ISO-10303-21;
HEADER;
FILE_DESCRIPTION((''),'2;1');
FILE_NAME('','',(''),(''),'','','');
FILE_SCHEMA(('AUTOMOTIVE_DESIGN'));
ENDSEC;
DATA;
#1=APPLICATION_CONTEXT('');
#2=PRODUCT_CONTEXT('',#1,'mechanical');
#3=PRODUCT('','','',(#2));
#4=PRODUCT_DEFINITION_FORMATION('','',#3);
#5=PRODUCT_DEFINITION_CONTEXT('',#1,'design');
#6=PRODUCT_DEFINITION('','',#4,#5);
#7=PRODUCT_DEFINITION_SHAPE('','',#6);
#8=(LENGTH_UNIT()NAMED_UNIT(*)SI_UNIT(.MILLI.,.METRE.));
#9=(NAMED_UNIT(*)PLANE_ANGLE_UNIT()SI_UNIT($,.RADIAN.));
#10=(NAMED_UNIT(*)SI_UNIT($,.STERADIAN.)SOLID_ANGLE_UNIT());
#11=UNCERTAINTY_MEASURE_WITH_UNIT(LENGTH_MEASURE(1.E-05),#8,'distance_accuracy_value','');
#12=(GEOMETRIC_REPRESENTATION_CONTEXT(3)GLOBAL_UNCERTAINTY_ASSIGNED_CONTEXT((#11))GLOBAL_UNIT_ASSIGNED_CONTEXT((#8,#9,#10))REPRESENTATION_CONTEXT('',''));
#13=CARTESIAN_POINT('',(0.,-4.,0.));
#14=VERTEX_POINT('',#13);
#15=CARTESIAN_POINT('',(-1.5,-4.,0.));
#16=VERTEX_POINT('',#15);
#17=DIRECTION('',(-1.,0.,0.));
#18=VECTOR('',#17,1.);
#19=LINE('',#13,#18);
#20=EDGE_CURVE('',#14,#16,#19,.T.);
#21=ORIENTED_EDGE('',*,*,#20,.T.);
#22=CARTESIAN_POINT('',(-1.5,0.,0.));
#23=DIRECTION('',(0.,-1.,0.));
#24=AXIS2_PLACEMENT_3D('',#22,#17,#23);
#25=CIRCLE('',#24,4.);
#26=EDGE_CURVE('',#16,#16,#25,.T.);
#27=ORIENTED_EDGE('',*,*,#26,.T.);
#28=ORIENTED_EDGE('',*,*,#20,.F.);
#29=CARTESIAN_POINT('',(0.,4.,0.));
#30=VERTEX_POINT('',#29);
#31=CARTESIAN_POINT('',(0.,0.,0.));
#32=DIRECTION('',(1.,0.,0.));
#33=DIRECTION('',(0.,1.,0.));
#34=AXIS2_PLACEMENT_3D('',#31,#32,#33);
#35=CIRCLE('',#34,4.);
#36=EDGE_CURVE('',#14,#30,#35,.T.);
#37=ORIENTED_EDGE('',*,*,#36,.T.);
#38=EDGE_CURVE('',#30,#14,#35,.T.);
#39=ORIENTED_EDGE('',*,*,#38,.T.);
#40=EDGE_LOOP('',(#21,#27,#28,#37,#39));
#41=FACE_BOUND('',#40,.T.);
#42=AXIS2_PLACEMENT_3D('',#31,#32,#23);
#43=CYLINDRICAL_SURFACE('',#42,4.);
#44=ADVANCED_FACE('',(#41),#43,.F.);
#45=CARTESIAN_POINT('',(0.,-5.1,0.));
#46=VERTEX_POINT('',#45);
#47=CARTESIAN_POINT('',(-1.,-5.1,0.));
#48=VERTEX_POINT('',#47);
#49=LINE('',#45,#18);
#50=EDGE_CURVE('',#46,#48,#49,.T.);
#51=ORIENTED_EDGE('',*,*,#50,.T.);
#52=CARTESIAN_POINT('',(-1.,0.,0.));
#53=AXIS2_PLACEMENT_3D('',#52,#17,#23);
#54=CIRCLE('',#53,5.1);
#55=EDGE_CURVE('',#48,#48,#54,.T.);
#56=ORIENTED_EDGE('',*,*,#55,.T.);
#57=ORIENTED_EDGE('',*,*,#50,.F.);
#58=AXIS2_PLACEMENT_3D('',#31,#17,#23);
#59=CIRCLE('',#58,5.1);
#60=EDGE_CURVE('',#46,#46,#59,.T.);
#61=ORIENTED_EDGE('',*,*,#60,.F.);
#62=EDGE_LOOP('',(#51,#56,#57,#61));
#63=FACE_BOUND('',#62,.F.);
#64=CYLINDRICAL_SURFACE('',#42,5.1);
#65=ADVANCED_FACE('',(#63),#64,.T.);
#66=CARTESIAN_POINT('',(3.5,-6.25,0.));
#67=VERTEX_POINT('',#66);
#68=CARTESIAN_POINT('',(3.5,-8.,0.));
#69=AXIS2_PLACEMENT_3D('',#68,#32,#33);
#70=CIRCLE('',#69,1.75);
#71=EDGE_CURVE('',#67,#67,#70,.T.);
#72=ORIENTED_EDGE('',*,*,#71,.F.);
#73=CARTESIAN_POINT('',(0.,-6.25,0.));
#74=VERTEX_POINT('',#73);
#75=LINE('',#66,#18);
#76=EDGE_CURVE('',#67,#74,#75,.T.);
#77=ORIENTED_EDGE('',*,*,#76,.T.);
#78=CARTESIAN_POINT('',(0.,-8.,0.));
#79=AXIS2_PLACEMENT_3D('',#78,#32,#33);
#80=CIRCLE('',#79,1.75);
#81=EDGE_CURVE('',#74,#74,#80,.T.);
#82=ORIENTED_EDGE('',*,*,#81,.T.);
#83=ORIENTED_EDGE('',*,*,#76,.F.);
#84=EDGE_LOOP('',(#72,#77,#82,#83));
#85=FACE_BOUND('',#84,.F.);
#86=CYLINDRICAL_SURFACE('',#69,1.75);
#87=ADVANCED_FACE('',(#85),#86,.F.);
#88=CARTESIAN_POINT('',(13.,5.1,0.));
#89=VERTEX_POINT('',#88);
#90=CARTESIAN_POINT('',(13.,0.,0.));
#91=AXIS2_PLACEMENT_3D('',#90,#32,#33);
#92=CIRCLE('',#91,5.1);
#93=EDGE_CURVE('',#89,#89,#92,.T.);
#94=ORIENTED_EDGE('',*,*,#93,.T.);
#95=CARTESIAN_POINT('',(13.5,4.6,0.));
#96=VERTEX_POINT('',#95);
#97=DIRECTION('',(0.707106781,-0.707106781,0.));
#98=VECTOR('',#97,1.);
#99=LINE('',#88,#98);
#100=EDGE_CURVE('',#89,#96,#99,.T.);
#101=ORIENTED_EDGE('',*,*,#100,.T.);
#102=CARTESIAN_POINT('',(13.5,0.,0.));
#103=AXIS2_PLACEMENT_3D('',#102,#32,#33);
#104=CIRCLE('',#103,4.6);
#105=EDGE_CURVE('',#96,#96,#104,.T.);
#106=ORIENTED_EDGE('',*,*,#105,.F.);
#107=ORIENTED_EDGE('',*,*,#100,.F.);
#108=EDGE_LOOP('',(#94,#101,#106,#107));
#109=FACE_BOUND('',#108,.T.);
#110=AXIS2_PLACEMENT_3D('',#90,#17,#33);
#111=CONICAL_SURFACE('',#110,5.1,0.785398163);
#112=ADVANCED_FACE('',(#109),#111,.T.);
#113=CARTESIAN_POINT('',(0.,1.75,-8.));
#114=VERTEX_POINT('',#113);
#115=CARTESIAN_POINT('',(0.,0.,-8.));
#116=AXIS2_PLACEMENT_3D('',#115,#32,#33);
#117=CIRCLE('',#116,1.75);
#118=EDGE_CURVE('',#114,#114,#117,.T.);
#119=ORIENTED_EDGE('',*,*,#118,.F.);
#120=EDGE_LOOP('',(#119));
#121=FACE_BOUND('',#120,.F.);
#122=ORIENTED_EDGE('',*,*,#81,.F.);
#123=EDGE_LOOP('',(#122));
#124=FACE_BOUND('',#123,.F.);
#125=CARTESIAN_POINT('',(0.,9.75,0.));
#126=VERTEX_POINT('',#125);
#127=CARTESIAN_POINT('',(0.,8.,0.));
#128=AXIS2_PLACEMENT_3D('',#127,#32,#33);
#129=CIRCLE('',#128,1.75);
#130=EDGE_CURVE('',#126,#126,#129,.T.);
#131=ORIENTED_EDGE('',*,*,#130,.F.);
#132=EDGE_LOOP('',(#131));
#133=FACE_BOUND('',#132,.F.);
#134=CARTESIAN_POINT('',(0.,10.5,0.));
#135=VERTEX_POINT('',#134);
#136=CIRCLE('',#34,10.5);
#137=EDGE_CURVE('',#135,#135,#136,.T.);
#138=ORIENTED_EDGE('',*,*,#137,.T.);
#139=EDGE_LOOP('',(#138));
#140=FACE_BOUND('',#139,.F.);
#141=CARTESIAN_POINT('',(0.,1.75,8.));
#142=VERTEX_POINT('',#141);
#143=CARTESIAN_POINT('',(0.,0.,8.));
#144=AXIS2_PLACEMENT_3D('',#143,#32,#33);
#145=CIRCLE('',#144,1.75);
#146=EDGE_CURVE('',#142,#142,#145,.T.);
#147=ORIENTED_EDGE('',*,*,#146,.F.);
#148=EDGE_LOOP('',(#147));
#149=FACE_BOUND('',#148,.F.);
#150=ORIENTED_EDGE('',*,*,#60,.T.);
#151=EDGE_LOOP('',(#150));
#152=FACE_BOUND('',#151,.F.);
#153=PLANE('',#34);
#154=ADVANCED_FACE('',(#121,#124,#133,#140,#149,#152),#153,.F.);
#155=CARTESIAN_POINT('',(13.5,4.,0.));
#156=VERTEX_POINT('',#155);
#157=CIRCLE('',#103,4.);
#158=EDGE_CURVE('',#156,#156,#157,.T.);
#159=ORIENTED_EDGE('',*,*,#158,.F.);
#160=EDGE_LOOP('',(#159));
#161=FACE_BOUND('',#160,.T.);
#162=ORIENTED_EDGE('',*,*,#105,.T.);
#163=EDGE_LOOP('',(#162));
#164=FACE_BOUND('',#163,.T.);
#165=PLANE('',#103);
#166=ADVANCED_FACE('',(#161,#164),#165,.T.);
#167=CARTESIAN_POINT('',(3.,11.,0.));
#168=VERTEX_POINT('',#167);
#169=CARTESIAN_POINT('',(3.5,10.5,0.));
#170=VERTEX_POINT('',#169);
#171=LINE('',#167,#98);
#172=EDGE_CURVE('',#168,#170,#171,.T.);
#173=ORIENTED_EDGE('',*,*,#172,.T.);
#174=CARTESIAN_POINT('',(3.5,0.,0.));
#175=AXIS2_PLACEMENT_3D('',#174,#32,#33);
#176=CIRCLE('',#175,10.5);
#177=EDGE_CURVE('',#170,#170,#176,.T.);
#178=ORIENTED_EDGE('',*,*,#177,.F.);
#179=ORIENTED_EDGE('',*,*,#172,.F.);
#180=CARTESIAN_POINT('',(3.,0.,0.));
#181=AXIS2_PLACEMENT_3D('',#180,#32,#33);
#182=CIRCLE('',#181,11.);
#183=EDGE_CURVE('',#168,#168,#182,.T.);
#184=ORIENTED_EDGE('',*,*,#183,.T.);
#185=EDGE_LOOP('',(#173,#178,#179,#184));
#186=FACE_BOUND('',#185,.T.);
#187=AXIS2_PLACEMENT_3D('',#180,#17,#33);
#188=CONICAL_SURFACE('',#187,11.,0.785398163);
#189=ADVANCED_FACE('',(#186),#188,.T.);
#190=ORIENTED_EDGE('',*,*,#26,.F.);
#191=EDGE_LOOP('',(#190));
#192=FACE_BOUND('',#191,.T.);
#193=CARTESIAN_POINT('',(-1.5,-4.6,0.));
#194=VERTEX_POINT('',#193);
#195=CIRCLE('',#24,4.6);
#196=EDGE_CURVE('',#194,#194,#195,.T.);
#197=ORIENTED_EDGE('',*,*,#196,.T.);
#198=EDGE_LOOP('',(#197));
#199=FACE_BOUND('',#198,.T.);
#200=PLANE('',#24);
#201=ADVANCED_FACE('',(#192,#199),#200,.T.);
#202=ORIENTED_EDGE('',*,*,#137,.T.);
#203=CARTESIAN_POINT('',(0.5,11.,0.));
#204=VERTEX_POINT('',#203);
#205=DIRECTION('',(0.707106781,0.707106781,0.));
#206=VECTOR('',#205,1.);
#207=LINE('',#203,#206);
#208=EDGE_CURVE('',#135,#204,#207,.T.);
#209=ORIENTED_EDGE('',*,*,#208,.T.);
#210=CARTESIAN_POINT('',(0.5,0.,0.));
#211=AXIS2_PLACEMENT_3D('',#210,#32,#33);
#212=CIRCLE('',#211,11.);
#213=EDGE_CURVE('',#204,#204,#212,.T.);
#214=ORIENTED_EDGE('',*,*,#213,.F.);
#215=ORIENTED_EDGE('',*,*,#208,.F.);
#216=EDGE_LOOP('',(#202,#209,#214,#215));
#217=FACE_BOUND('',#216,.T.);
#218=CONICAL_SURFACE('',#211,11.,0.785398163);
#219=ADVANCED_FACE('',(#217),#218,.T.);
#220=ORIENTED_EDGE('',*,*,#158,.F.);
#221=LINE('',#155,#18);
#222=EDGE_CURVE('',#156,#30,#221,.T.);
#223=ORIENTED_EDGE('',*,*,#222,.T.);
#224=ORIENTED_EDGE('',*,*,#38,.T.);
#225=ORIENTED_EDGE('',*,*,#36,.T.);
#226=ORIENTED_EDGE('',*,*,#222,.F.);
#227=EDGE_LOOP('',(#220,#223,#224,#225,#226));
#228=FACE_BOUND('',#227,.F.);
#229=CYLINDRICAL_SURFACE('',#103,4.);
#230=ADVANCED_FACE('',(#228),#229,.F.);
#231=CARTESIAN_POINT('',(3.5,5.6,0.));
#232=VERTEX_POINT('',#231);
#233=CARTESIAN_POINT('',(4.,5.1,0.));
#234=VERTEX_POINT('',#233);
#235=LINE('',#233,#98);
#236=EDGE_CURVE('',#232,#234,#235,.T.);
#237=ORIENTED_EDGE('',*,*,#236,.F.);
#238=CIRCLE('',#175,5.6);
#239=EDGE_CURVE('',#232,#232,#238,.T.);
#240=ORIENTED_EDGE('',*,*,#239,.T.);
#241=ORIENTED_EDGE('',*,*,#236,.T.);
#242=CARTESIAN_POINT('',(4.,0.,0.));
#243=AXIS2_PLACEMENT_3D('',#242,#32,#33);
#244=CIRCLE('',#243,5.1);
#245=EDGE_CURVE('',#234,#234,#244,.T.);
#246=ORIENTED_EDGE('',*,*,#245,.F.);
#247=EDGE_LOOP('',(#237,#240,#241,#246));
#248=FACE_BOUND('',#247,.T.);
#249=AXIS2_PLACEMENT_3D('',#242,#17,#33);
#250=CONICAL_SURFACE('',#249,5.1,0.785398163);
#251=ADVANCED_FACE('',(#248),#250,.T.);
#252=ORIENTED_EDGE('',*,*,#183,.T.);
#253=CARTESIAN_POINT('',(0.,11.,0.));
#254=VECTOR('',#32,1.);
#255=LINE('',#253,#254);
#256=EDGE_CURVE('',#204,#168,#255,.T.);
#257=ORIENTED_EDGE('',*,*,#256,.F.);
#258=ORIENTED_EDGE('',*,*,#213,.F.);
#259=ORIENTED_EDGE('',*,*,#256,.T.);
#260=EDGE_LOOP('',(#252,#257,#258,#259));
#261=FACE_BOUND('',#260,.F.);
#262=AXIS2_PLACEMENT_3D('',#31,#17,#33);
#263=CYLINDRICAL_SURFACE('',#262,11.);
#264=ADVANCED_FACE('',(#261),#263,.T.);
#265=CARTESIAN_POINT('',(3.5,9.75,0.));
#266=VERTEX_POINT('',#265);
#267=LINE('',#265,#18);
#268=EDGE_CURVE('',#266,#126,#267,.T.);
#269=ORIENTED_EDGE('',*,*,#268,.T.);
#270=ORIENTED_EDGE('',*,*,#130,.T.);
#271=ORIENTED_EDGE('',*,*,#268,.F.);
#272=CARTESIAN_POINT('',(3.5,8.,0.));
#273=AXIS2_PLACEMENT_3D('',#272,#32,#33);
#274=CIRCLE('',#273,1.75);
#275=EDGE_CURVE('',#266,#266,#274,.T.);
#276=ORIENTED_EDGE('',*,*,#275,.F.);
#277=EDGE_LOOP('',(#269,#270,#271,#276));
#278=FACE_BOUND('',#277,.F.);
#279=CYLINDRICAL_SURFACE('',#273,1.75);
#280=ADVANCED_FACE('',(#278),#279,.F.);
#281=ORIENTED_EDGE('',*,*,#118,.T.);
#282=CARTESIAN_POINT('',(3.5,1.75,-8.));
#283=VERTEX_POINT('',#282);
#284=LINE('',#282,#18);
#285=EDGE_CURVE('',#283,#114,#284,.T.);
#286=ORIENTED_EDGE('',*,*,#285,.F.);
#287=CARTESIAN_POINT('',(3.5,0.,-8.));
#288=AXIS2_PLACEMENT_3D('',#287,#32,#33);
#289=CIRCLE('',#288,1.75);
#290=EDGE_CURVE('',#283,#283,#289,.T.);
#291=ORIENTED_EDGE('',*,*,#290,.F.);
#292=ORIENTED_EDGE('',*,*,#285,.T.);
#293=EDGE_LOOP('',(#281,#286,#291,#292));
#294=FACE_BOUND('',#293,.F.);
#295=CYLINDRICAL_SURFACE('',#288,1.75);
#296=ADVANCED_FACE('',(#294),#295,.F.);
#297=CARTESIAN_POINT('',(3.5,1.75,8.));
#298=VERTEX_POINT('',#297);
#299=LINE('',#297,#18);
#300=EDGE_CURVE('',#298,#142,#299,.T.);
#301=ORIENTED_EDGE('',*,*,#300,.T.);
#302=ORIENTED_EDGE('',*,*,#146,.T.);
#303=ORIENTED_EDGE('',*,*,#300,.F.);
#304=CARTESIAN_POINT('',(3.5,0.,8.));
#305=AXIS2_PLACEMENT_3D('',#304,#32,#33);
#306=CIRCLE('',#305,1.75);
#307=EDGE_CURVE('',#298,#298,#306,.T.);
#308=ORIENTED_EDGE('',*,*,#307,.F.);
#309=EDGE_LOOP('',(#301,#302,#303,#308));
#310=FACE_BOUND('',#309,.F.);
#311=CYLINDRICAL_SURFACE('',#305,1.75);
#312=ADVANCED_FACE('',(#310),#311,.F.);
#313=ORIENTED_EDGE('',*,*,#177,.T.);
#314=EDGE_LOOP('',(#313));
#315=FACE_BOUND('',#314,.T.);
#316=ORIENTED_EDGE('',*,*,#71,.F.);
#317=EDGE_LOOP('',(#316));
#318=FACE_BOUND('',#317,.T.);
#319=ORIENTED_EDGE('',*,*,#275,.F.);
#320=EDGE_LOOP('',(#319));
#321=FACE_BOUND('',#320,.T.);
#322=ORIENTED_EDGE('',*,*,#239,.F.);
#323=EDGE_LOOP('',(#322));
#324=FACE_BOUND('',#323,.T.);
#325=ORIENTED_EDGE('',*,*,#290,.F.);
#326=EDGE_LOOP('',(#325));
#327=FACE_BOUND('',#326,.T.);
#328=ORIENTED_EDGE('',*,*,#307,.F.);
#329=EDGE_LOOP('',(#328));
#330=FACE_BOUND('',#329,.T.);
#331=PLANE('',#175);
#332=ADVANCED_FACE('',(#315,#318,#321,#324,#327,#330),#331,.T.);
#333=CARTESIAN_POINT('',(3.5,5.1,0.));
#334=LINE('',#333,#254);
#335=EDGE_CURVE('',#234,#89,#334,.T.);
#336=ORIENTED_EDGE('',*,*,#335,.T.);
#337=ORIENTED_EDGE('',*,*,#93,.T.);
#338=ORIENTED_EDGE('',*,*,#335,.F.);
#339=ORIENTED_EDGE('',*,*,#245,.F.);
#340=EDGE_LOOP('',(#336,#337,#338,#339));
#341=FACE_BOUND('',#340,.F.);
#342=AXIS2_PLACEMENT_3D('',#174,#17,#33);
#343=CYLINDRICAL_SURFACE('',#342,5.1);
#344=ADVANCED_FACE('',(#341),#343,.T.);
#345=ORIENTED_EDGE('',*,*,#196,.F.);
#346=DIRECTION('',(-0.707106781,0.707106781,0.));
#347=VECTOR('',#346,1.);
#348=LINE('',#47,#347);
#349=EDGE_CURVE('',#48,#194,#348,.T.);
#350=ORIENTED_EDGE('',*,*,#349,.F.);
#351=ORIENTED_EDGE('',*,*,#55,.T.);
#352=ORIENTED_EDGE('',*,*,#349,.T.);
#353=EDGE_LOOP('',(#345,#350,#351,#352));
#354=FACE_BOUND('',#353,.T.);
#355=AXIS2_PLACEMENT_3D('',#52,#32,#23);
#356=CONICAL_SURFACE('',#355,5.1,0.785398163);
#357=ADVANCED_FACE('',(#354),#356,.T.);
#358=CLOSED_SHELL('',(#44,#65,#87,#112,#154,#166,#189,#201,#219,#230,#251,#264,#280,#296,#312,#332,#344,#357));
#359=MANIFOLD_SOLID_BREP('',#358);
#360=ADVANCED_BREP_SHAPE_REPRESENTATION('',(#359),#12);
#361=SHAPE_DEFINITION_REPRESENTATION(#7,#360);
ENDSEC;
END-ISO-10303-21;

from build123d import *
from build123d import SkipClean  # not in build123d's __all__

# Parameters (mm, degrees)
F0_R      = 11
F1_DEPTH  = 3.5
F2_R      = 5.1
F3_DEPTH  = 10
F4_R      = 4
F5_DEPTH  = 25
F6_R      = 5.1
F6_R_2    = 4
F7_DEPTH  = 1.5
F8_SIZE   = 0.5
F9_R      = 1.75
F10_DEPTH = 5.001


# Not quite as in the source:
# - after a boolean that leaves OpenCascade's solid faulty, fix() repairs it


with BuildPart() as f1:
    # F0 (on Right) → F1 (new body)
    with BuildSketch(Plane.YZ):
        Circle(F0_R)
    extrude(amount=F1_DEPTH)

    # F2 (on face) → F3 (join)
    with BuildSketch(Plane.YZ.offset(3.5)):
        Circle(F2_R)
    extrude(amount=F3_DEPTH)

    # F4 (on face) → F5 (cut)
    with BuildSketch(Plane.YZ.offset(13.5)):
        Circle(F4_R)
    extrude(amount=-F5_DEPTH, mode=Mode.SUBTRACT)

    # F6 (on face) → F7 (join)
    with BuildSketch(Plane(origin=(0, 0, 0), x_dir=(0, -1, 0), z_dir=(-1, 0, 0))):
        Circle(F6_R)
        Circle(F6_R_2, mode=Mode.SUBTRACT)
    with SkipClean():  # cleaning this boolean's faces spoils the solid; the shape is the same uncleaned
        extrude(amount=F7_DEPTH)

    # F8
    f8_edges = [f1.edges().sort_by_distance(p)[0] for p in [
        (13.5, -5.1, 0),
        (3.5, -11, 0),
        (0, -11, 0),
        (-1.5, 5.1, 0),
        (3.5, -5.1, 0),
    ]]
    chamfer(f8_edges, length=F8_SIZE)

    # F9 (on face) → F10 (cut, through all)
    with BuildSketch(Plane.YZ.offset(3.5)):
        with Locations((0, 8)):
            Circle(F9_R)
        with Locations((-8, 0)):
            Circle(F9_R)
        with Locations((0, -8)):
            Circle(F9_R)
        with Locations((8, 0)):
            Circle(F9_R)
    extrude(amount=-F10_DEPTH, mode=Mode.SUBTRACT)

    add(f1.part.fix(), mode=Mode.REPLACE)


solid = f1.part
